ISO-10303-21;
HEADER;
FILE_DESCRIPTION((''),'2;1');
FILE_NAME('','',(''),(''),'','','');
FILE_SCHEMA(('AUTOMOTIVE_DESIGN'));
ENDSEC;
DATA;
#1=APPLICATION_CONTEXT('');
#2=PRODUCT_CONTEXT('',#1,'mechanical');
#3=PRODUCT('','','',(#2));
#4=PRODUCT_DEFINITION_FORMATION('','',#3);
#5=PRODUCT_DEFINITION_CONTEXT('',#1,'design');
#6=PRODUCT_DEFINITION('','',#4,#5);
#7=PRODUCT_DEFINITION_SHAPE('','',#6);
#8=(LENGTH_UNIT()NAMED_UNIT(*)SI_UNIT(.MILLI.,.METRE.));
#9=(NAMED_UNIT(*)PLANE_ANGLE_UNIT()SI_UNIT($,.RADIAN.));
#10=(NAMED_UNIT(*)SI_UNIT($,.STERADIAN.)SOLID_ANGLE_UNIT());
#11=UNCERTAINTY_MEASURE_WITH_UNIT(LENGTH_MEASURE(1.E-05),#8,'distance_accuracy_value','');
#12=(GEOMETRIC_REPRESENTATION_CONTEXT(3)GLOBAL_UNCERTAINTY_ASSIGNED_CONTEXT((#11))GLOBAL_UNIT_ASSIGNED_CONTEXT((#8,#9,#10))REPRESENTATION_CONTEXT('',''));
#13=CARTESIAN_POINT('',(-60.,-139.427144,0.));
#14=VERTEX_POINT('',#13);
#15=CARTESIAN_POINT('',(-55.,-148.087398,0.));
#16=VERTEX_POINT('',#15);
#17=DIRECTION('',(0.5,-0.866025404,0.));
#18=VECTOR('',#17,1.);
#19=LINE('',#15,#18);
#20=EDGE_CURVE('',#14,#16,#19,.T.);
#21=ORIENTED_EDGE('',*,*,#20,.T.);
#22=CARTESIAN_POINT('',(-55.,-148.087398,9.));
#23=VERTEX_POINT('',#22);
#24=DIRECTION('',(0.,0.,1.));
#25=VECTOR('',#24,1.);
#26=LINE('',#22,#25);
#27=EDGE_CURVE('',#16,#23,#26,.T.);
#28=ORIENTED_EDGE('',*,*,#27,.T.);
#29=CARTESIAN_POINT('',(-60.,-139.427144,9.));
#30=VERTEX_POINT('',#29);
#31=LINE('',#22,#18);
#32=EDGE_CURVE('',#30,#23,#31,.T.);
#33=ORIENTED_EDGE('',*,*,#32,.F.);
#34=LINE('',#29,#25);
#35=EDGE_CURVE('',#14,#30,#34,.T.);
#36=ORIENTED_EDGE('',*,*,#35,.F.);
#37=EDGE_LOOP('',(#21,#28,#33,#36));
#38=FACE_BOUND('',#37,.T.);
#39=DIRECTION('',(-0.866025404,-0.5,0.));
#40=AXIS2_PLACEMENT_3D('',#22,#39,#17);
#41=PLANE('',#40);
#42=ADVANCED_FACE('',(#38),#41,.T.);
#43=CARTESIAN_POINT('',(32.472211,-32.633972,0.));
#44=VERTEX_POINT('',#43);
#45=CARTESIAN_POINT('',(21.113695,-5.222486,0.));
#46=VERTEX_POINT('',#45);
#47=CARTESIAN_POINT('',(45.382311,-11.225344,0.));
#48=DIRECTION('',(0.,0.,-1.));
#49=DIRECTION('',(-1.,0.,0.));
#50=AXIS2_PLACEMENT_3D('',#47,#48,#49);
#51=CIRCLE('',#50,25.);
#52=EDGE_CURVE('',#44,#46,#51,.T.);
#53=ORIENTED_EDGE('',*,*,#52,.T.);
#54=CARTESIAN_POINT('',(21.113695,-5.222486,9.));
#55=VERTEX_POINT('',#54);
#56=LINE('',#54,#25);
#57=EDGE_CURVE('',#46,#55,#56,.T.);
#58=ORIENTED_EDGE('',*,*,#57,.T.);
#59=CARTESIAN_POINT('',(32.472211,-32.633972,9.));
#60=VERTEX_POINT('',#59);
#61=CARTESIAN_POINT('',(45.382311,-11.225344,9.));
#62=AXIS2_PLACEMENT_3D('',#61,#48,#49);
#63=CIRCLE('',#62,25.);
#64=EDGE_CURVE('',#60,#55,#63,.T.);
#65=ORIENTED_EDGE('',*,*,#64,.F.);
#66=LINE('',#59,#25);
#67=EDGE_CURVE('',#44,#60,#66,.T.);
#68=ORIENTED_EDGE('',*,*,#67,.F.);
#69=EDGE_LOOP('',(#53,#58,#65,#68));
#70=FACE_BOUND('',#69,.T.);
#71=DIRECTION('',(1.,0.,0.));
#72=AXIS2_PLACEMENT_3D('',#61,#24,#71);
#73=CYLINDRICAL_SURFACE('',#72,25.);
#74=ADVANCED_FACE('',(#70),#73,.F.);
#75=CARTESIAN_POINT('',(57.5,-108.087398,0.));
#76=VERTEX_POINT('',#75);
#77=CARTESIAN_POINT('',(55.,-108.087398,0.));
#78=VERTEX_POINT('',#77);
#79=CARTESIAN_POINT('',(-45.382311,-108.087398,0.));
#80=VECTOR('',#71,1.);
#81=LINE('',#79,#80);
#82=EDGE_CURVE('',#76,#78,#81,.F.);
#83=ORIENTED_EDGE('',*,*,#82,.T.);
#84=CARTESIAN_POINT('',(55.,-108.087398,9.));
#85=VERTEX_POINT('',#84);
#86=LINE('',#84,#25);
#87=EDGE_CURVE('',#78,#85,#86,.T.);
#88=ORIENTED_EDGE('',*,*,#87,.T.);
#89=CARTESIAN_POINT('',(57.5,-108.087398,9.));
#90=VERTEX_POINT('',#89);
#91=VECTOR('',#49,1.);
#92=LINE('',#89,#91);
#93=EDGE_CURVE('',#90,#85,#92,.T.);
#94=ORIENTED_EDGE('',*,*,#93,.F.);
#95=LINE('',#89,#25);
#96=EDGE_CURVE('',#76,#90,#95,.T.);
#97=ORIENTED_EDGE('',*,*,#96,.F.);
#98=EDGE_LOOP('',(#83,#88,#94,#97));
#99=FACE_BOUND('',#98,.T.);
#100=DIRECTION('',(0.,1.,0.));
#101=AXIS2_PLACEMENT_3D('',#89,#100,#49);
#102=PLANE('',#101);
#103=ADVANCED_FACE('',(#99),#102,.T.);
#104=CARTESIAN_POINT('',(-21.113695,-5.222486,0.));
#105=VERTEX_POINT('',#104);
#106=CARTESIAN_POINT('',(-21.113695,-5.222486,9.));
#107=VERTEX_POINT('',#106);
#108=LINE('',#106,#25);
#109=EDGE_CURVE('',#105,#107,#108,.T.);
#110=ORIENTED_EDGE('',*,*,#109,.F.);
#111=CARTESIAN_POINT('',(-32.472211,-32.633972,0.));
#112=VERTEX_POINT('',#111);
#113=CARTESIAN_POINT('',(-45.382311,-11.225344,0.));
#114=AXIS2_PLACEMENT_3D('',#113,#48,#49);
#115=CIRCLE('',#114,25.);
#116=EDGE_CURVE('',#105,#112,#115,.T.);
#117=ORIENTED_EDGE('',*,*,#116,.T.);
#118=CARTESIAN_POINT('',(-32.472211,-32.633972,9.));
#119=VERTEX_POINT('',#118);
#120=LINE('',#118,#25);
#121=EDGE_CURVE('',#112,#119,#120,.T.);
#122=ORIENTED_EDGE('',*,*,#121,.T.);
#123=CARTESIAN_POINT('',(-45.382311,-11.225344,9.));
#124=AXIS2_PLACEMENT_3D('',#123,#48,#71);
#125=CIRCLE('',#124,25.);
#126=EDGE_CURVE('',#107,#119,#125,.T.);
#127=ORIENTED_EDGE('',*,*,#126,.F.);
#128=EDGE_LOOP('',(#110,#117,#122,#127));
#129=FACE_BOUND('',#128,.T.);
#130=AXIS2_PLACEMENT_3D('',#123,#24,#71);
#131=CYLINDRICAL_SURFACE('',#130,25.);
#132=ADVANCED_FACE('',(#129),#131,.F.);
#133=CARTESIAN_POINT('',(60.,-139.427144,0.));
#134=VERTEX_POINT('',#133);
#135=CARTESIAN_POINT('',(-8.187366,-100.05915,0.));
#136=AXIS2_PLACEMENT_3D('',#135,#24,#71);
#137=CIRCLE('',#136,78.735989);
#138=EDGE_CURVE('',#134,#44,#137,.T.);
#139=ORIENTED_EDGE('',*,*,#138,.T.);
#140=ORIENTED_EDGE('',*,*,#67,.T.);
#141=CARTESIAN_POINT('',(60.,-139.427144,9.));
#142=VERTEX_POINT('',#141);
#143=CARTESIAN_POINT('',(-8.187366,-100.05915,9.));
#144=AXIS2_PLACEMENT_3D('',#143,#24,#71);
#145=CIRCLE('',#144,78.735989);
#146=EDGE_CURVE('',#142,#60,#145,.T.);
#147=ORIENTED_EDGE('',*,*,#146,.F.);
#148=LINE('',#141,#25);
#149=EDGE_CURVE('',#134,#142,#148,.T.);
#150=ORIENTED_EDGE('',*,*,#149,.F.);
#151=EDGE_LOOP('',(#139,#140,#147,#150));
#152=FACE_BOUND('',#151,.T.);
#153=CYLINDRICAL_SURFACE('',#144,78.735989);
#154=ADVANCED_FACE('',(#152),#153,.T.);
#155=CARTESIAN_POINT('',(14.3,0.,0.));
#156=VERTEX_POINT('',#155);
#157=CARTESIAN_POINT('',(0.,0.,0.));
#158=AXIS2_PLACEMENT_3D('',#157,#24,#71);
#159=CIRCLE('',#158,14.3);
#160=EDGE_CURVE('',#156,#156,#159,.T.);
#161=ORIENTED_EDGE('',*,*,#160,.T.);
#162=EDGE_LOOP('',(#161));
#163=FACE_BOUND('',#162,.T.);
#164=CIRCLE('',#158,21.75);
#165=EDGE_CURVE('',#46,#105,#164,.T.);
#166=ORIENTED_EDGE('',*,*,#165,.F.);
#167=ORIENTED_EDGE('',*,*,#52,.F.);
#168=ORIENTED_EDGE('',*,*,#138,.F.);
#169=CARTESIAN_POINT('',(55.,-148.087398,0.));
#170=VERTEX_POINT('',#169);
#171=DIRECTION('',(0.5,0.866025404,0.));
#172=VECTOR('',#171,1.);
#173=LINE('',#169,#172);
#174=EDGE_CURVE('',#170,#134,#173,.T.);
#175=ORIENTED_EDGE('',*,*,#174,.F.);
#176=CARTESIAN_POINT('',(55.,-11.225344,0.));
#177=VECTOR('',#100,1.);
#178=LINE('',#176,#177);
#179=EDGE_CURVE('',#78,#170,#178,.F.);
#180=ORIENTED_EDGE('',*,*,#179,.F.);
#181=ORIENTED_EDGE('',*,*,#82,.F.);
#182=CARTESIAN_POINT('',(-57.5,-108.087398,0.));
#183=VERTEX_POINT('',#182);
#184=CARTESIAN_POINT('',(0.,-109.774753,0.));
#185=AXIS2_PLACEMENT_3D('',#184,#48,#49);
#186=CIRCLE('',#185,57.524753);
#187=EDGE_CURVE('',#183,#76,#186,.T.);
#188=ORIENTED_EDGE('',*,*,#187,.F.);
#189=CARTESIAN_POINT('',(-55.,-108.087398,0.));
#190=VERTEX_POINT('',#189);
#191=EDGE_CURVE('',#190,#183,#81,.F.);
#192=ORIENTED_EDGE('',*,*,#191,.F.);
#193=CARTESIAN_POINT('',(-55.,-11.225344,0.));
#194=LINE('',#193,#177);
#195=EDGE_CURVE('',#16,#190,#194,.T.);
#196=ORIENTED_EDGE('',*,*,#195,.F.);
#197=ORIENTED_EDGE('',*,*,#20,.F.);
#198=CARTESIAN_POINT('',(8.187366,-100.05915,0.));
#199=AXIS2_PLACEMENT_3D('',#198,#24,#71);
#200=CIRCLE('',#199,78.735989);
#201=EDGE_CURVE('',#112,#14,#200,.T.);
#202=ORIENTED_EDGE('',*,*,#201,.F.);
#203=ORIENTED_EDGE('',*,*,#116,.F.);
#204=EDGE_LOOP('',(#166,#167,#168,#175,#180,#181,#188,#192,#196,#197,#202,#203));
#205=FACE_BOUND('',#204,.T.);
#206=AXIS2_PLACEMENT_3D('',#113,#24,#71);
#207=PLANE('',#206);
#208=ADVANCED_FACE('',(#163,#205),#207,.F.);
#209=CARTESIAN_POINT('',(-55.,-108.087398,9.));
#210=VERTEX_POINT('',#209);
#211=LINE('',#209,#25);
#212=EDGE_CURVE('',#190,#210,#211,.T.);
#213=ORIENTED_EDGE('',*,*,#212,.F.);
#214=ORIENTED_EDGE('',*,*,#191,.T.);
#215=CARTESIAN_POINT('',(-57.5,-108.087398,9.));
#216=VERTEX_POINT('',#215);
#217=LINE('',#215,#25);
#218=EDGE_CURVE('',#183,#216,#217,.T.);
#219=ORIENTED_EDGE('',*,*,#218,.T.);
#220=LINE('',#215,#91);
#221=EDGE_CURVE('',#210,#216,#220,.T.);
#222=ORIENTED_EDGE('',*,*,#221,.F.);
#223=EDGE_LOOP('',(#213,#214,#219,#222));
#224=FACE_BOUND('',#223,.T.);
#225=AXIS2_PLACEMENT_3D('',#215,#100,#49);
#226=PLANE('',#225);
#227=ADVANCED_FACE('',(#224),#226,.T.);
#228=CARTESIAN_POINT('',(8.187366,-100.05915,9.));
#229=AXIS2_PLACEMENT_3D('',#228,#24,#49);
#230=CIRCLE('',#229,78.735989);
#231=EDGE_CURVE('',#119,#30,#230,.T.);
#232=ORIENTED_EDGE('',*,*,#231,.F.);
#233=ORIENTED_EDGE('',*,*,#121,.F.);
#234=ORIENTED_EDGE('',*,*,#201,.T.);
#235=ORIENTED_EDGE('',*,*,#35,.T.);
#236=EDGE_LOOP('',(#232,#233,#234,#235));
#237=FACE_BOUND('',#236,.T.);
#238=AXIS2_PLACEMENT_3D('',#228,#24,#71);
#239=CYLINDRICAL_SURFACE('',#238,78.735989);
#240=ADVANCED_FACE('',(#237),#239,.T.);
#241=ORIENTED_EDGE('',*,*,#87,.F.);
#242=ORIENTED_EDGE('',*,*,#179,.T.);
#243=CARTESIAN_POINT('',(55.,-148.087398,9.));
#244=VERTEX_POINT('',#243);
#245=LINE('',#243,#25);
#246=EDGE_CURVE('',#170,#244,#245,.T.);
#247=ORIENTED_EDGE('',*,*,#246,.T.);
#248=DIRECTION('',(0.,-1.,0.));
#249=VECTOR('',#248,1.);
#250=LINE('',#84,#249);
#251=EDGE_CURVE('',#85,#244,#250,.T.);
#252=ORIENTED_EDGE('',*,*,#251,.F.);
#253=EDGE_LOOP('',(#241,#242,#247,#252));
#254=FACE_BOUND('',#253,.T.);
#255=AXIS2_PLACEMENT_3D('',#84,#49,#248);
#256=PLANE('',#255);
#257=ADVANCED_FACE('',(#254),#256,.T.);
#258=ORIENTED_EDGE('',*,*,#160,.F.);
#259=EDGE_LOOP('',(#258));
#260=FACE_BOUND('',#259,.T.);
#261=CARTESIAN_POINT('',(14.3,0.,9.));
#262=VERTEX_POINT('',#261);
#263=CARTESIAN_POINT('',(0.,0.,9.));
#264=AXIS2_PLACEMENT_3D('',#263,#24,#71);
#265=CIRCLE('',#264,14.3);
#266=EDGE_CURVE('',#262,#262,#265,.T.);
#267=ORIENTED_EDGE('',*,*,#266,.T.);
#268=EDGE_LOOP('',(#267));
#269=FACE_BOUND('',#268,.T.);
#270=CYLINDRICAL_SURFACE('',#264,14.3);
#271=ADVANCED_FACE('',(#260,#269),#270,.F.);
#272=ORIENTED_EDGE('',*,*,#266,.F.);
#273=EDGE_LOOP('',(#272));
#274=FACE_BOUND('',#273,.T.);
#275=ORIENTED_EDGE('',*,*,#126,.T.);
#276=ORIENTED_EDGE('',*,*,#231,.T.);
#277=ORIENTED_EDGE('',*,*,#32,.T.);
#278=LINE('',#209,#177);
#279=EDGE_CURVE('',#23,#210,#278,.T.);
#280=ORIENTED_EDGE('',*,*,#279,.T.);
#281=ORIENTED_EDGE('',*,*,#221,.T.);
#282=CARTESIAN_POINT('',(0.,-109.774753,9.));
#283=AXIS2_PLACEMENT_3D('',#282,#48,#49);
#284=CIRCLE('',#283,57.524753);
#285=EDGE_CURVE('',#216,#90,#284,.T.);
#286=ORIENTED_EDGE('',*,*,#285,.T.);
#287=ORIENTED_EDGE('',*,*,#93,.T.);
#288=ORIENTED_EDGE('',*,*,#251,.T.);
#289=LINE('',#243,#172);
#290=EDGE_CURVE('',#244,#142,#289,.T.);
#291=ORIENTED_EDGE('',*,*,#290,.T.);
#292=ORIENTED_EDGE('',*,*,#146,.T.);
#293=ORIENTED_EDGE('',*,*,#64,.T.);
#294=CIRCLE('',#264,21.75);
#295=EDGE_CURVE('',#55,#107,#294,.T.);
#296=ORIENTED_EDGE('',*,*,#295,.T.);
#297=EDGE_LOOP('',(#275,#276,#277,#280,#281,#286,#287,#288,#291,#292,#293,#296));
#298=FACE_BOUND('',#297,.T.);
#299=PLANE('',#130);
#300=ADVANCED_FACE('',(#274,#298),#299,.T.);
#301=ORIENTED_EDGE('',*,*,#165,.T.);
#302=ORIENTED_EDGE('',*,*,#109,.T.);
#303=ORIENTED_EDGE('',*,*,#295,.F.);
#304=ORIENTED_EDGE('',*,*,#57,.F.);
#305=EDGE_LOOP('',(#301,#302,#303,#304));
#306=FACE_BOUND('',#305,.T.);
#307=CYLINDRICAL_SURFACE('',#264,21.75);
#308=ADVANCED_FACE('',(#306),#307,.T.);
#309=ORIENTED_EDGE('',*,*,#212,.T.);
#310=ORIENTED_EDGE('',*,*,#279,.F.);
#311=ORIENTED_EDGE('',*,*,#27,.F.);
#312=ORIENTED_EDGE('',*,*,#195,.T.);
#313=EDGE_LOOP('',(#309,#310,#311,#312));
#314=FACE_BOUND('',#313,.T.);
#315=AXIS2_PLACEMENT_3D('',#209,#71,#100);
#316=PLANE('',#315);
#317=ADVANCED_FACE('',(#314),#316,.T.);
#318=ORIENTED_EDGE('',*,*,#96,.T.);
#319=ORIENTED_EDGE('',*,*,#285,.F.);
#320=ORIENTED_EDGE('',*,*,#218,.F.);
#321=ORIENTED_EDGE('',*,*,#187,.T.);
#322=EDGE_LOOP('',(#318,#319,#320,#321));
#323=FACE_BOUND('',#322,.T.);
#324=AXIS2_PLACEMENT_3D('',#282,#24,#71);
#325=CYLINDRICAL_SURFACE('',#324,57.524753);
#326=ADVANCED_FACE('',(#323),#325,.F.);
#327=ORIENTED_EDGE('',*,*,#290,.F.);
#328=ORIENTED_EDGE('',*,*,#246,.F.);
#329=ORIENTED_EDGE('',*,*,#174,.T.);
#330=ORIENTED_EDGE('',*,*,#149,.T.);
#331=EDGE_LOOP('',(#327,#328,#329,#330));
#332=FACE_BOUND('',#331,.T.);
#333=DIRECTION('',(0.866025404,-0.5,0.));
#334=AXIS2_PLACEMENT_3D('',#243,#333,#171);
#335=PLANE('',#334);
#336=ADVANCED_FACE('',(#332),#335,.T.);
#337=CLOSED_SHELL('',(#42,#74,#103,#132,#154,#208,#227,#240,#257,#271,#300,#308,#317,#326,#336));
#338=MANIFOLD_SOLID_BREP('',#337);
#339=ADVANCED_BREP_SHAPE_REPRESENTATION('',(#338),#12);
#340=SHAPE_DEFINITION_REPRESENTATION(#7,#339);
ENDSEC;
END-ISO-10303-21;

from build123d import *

# Parameters (mm, degrees)
SKETCH_1_R      = 14.3
EXTRUDE_1_DEPTH = 9


with BuildPart() as part:
    # Sketch 1 → Бобышка-Вытянуть1 (new body)
    with BuildSketch(Plane.XY):
        with BuildLine():
            Line((-55, -108.08739831), (-55, -148.08739831))
            Line((-55, -148.08739831), (-60, -139.427144273))
            ThreePointArc((-60, -139.427144273), (-68.056385746, -80.406003175), (-32.47221146, -32.633971733))
            ThreePointArc((-32.47221146, -32.633971733), (-22.286605842, -20.795527399), (-21.113695467, -5.222486356))
            ThreePointArc((-21.113695467, -5.222486356), (0, 21.75), (21.113695467, -5.222486356))
            ThreePointArc((21.113695467, -5.222486356), (22.286605842, -20.795527399), (32.47221146, -32.633971733))
            ThreePointArc((32.47221146, -32.633971733), (68.056385746, -80.406003175), (60, -139.427144273))
            Line((60, -139.427144273), (55, -148.08739831))
            Line((55, -148.08739831), (55, -108.08739831))
            Line((55, -108.08739831), (57.5, -108.08739831))
            ThreePointArc((57.5, -108.08739831), (0, -52.25), (-57.5, -108.08739831))
            Line((-57.5, -108.08739831), (-55, -108.08739831))
        make_face()
        Circle(SKETCH_1_R, mode=Mode.SUBTRACT)
    extrude(amount=EXTRUDE_1_DEPTH)


solid = part.part
